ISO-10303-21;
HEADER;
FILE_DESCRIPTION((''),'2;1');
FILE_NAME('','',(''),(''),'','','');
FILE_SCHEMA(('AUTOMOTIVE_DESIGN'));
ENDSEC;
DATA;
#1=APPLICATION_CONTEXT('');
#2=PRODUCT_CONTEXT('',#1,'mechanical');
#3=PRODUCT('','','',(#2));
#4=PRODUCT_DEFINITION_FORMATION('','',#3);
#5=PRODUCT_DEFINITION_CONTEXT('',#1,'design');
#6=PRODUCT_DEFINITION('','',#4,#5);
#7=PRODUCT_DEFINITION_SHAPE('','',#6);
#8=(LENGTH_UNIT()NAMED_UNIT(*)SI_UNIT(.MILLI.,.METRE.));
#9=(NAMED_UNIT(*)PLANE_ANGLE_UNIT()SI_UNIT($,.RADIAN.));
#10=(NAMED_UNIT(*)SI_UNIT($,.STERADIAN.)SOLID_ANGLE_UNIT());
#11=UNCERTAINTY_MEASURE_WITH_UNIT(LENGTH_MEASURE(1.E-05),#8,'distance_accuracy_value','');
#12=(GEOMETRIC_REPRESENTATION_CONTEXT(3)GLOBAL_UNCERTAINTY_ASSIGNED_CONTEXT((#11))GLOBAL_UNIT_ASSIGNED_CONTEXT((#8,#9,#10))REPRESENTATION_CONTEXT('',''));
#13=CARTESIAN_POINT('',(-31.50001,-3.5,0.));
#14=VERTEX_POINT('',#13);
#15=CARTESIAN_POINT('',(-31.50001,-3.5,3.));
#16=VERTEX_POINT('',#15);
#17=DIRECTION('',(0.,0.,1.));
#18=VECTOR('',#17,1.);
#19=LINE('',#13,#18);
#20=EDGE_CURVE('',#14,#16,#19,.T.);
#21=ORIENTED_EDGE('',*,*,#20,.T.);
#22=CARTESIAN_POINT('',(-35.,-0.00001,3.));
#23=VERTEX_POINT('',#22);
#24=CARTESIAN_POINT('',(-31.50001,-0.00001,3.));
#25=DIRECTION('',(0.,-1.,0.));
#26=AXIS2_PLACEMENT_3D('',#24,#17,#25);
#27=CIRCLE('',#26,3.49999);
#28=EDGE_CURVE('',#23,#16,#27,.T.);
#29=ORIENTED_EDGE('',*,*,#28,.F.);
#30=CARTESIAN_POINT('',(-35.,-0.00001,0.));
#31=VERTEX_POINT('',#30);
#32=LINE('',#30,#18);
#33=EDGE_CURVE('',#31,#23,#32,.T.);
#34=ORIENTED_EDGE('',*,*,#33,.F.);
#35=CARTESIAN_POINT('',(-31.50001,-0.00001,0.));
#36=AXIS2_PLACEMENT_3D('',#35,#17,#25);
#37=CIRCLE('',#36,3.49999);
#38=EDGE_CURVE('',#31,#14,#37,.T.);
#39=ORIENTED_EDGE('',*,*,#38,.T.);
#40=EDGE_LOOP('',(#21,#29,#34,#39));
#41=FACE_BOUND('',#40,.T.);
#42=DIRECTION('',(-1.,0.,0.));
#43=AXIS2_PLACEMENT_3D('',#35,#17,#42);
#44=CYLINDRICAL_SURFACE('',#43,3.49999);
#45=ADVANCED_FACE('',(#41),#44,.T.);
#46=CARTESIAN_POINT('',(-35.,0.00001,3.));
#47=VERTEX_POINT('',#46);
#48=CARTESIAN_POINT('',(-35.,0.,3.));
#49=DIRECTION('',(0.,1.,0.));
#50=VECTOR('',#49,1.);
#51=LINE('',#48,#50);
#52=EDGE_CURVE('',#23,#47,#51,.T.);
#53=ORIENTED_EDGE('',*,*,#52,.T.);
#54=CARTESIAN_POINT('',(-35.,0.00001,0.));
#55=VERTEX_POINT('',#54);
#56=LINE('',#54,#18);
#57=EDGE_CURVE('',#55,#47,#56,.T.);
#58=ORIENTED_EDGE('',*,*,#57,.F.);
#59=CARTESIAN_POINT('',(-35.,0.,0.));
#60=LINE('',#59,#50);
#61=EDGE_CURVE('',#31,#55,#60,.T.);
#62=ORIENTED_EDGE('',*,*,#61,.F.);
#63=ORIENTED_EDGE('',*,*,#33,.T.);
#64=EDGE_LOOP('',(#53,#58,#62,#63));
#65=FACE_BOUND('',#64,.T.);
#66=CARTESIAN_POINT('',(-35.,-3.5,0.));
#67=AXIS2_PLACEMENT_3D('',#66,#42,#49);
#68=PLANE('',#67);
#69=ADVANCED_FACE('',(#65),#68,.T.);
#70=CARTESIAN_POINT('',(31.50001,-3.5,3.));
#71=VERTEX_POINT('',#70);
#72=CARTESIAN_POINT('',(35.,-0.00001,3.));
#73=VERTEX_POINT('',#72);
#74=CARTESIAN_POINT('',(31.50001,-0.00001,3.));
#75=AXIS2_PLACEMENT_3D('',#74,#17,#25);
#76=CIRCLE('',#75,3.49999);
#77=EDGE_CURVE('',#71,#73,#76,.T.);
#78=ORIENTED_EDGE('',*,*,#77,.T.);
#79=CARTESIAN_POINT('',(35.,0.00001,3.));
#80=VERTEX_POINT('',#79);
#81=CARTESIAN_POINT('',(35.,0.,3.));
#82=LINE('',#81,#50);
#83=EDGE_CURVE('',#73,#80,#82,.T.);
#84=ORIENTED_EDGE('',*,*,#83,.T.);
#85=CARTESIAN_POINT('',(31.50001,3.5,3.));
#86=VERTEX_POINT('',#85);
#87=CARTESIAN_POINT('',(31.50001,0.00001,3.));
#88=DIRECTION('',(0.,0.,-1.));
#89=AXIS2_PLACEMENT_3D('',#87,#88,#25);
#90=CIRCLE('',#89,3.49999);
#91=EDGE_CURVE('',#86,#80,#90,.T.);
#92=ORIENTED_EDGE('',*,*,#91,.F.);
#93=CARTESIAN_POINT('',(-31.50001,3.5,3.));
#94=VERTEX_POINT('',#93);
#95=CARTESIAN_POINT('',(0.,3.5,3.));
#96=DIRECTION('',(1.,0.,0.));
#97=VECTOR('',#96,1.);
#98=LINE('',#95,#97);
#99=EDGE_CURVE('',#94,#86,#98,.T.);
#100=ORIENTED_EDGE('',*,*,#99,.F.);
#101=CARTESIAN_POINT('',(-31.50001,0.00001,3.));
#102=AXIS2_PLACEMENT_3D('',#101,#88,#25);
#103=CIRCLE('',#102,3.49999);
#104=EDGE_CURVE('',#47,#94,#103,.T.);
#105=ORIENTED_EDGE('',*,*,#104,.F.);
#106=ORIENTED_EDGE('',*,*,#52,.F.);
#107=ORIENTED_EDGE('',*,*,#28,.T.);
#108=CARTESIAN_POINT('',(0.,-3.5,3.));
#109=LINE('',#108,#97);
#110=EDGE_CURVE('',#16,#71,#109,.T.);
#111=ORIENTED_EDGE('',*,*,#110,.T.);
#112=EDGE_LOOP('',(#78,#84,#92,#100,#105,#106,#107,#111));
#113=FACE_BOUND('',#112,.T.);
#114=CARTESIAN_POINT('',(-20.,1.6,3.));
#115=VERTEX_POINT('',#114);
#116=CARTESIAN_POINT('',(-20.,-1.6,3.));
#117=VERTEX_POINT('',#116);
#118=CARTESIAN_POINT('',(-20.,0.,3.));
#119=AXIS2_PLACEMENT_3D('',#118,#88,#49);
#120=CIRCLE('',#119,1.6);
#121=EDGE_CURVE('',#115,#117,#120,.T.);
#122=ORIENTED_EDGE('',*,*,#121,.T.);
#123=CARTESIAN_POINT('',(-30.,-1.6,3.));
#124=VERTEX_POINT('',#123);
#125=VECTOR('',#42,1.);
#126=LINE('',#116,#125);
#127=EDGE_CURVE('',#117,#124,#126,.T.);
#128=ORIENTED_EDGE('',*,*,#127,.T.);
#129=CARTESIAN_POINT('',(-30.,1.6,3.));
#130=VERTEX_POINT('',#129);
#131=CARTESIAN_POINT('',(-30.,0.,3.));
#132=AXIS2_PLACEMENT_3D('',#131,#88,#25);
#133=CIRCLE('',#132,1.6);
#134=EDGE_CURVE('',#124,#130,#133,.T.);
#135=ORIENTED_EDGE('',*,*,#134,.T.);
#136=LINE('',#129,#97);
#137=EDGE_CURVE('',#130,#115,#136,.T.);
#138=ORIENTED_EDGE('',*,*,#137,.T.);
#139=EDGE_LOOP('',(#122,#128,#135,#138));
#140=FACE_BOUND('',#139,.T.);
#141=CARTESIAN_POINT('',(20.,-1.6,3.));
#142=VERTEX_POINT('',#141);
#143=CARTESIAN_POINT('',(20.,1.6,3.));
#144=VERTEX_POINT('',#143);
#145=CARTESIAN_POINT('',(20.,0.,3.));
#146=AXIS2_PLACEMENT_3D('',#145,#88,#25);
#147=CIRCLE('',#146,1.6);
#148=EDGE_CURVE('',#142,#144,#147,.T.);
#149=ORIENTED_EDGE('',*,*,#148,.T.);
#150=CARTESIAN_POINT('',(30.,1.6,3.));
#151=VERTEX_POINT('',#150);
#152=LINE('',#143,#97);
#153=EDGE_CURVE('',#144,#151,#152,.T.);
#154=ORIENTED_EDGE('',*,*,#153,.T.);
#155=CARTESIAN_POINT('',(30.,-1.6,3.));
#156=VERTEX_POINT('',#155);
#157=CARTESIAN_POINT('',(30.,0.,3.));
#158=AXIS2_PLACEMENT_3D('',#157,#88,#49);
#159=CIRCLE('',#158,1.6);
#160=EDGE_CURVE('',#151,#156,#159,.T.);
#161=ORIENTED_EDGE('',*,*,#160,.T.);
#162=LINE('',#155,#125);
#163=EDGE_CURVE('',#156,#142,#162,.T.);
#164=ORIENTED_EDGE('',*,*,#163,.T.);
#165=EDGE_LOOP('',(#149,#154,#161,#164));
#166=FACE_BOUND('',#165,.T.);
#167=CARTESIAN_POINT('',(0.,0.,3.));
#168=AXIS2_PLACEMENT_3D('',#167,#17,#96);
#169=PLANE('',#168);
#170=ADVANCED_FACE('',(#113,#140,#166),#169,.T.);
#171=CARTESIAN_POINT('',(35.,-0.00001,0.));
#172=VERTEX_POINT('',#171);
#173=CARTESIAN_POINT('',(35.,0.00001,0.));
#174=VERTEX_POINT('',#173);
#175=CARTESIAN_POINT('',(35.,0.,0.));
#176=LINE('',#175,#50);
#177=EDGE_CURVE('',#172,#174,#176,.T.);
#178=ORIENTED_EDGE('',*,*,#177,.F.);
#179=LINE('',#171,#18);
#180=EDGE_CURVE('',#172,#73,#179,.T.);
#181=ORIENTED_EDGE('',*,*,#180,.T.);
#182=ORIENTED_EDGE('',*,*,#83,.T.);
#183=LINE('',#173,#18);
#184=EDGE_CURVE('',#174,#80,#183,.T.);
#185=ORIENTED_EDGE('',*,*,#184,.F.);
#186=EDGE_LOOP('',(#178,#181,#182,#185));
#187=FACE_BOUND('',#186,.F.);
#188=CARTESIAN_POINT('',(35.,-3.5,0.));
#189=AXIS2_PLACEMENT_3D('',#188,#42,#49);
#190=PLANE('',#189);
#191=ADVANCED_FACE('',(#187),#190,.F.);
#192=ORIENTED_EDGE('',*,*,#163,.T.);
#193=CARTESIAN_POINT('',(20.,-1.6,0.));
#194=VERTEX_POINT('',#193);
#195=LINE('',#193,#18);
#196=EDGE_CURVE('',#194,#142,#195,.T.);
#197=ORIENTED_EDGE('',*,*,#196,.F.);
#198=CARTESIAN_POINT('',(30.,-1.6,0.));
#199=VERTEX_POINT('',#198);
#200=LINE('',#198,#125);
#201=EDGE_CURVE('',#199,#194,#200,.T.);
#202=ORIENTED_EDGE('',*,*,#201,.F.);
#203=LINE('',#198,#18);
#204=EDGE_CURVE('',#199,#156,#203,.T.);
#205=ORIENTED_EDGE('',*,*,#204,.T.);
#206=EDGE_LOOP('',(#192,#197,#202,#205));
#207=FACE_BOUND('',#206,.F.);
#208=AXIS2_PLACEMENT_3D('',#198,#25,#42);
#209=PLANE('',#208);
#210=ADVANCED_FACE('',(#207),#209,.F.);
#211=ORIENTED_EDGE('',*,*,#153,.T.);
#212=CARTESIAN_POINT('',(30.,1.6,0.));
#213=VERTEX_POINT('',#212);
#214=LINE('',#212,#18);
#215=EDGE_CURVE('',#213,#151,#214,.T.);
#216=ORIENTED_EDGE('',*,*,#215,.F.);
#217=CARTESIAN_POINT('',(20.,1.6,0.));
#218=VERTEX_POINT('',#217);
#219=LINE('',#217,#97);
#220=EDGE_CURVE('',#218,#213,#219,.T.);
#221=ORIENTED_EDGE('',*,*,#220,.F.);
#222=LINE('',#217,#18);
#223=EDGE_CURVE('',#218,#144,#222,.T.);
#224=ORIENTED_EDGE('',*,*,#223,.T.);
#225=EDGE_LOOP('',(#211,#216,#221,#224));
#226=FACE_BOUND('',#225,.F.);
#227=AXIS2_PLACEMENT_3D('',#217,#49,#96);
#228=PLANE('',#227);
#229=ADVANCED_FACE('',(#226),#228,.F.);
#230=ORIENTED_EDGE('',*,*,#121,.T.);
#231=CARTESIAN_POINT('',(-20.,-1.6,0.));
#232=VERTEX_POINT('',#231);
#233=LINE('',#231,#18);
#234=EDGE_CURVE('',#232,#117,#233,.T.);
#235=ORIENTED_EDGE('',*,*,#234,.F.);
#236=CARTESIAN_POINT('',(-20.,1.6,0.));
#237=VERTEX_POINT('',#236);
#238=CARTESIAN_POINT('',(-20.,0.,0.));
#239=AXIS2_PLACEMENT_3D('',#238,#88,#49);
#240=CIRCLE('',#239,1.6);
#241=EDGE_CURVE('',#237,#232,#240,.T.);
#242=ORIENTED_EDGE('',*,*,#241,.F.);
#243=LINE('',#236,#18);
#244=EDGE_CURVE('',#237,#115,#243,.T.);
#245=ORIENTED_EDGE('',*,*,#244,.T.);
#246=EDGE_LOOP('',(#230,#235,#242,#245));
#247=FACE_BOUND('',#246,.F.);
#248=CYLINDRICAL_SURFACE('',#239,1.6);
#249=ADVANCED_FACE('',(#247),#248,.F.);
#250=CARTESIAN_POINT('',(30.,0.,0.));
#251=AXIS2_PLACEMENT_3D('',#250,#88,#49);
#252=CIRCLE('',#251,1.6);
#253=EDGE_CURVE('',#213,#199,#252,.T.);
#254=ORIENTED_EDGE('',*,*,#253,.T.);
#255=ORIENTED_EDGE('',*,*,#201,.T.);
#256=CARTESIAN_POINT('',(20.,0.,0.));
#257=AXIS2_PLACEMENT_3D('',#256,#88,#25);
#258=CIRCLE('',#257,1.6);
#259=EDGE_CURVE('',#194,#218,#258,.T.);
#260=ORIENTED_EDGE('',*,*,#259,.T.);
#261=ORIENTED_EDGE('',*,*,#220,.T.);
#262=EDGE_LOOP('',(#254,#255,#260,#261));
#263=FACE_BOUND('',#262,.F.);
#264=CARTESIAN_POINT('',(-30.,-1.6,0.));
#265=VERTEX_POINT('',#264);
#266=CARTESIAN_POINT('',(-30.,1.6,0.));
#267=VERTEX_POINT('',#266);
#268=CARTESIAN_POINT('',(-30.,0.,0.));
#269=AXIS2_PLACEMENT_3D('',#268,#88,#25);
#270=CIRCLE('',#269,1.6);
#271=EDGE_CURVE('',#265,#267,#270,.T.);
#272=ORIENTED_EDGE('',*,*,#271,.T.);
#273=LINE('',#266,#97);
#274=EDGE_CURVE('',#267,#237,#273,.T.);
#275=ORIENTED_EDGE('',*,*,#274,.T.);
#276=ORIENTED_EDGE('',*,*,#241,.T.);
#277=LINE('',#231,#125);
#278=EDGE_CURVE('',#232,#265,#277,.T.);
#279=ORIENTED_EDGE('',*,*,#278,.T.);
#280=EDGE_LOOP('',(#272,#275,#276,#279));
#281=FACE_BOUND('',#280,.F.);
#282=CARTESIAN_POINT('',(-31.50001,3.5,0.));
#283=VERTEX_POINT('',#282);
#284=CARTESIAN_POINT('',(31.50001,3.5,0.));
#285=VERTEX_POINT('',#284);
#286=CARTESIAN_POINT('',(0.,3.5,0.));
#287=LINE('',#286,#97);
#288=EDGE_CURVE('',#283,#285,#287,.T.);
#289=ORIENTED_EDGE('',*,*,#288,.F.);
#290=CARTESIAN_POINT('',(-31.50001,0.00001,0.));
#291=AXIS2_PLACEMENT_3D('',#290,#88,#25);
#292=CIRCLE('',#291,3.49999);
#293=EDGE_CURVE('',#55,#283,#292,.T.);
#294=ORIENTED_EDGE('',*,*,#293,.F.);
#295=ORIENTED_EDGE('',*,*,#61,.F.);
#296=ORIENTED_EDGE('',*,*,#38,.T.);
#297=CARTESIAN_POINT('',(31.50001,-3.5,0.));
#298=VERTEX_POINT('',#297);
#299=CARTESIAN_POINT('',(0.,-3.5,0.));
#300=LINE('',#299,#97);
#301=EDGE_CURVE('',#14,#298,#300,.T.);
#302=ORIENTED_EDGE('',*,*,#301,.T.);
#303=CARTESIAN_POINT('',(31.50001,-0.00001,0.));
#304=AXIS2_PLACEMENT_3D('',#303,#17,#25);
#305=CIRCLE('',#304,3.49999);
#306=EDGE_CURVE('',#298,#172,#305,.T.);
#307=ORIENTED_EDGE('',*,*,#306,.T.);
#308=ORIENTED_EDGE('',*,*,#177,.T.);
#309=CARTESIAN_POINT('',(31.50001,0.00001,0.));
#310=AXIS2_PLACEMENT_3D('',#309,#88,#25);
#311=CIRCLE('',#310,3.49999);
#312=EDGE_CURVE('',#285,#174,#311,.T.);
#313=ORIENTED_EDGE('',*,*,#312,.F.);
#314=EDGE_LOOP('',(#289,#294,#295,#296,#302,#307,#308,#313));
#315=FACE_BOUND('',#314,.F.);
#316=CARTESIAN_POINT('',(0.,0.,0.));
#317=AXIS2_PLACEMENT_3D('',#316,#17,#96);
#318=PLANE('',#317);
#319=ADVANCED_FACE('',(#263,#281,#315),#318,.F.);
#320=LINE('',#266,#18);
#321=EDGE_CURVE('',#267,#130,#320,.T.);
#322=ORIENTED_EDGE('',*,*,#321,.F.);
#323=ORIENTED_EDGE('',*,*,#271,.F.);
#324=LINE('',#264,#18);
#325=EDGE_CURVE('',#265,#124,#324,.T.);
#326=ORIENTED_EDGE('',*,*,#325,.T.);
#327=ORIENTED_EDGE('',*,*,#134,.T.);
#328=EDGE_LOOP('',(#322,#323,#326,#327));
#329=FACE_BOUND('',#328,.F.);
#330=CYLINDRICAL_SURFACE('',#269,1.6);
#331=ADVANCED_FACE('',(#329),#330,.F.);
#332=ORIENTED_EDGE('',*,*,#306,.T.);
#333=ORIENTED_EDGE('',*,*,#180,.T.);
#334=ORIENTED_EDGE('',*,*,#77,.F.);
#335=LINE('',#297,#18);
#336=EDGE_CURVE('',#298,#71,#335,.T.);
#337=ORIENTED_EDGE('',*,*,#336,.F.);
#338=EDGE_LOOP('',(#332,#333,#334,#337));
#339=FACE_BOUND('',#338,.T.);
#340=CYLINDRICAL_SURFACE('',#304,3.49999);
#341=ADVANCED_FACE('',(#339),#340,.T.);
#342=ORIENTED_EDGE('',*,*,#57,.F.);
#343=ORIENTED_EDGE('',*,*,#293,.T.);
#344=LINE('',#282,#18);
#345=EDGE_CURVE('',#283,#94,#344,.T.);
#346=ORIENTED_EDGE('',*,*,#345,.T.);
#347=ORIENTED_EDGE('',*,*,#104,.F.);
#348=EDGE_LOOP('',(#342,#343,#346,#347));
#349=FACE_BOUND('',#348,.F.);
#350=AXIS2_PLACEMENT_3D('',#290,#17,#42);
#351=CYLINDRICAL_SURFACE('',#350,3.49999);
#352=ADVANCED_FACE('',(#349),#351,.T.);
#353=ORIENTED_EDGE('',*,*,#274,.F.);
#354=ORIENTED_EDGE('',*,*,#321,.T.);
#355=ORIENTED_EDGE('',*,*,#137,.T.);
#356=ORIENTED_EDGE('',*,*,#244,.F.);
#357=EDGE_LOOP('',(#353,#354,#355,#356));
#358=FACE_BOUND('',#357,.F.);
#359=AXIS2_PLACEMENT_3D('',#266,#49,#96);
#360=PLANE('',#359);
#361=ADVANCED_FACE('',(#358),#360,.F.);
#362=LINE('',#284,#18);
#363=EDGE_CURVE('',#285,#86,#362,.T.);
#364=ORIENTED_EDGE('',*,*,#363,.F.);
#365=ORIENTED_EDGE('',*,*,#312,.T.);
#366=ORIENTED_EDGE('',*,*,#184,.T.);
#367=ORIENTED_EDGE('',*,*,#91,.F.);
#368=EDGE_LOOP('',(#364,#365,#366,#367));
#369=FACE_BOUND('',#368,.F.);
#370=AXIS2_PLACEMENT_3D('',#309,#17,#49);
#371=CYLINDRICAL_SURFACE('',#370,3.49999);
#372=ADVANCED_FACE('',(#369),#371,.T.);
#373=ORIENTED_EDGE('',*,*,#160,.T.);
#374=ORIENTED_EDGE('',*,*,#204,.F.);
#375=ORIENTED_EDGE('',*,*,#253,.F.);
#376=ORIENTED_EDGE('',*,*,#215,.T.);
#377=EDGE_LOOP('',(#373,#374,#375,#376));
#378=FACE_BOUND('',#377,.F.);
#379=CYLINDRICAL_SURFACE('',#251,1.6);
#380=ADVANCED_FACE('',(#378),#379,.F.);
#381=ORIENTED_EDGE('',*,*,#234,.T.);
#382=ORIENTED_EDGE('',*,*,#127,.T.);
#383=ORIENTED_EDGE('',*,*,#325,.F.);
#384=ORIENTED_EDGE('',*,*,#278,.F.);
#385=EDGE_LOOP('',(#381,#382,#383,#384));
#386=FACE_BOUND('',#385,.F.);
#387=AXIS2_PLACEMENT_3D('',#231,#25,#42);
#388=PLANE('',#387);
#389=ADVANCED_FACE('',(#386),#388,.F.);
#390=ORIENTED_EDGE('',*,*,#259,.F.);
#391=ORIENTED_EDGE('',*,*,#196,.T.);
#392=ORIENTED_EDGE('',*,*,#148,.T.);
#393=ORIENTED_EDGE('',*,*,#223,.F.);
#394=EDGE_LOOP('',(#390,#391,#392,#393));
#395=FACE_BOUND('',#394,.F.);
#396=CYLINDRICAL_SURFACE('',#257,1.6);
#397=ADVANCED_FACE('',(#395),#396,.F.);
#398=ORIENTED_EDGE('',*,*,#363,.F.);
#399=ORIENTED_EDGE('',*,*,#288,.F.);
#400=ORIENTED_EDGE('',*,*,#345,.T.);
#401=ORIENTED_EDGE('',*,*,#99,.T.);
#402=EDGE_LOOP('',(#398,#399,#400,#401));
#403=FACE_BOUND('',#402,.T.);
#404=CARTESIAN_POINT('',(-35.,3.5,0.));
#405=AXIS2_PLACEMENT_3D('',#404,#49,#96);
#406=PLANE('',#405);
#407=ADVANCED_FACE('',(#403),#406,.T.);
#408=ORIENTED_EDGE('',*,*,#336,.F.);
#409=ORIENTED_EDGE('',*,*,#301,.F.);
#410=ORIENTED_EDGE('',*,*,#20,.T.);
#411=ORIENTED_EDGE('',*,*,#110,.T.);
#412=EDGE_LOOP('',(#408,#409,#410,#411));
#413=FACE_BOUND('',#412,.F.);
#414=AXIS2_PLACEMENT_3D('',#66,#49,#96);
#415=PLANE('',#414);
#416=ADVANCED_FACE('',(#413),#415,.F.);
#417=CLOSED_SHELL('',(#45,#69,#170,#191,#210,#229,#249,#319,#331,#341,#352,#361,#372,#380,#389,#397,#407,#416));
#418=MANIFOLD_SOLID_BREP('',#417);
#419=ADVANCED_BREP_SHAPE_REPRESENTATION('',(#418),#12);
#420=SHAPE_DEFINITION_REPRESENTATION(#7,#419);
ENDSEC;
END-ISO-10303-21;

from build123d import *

# Parameters (mm, degrees)
F0_W     = 70
F0_H     = 7
F1_DEPTH = 3
F2_R     = 3.49999


# Not quite as in the source:
# - a fillet or chamfer is up to 0.001 mm smaller than in the source, because OpenCascade refuses the exact size


with BuildPart() as f1:
    # F0 (on Top) → F1 (new body)
    with BuildSketch(Plane.XY):
        Rectangle(F0_W, F0_H)
        with BuildLine():
            Line((-20, -1.6), (-30, -1.6))
            ThreePointArc((-30, -1.6), (-31.6, 0), (-30, 1.6))
            Line((-30, 1.6), (-20, 1.6))
            ThreePointArc((-20, 1.6), (-18.4, 0), (-20, -1.6))
        make_face(mode=Mode.SUBTRACT)
        with BuildLine():
            Line((20, 1.6), (30, 1.6))
            ThreePointArc((30, 1.6), (31.6, 0), (30, -1.6))
            Line((30, -1.6), (20, -1.6))
            ThreePointArc((20, -1.6), (18.4, 0), (20, 1.6))
        make_face(mode=Mode.SUBTRACT)
    extrude(amount=F1_DEPTH)

    # F2 (radius 3.5 in the source; OpenCascade refuses exactly that, so slightly less here)
    f2_edges = [f1.edges().sort_by_distance(p)[0] for p in [
        (-35, 3.5, 1.5),
        (-35, -3.5, 1.5),
        (35, 3.5, 1.5),
        (35, -3.5, 1.5),
    ]]
    fillet(f2_edges, radius=F2_R)


solid = f1.part
